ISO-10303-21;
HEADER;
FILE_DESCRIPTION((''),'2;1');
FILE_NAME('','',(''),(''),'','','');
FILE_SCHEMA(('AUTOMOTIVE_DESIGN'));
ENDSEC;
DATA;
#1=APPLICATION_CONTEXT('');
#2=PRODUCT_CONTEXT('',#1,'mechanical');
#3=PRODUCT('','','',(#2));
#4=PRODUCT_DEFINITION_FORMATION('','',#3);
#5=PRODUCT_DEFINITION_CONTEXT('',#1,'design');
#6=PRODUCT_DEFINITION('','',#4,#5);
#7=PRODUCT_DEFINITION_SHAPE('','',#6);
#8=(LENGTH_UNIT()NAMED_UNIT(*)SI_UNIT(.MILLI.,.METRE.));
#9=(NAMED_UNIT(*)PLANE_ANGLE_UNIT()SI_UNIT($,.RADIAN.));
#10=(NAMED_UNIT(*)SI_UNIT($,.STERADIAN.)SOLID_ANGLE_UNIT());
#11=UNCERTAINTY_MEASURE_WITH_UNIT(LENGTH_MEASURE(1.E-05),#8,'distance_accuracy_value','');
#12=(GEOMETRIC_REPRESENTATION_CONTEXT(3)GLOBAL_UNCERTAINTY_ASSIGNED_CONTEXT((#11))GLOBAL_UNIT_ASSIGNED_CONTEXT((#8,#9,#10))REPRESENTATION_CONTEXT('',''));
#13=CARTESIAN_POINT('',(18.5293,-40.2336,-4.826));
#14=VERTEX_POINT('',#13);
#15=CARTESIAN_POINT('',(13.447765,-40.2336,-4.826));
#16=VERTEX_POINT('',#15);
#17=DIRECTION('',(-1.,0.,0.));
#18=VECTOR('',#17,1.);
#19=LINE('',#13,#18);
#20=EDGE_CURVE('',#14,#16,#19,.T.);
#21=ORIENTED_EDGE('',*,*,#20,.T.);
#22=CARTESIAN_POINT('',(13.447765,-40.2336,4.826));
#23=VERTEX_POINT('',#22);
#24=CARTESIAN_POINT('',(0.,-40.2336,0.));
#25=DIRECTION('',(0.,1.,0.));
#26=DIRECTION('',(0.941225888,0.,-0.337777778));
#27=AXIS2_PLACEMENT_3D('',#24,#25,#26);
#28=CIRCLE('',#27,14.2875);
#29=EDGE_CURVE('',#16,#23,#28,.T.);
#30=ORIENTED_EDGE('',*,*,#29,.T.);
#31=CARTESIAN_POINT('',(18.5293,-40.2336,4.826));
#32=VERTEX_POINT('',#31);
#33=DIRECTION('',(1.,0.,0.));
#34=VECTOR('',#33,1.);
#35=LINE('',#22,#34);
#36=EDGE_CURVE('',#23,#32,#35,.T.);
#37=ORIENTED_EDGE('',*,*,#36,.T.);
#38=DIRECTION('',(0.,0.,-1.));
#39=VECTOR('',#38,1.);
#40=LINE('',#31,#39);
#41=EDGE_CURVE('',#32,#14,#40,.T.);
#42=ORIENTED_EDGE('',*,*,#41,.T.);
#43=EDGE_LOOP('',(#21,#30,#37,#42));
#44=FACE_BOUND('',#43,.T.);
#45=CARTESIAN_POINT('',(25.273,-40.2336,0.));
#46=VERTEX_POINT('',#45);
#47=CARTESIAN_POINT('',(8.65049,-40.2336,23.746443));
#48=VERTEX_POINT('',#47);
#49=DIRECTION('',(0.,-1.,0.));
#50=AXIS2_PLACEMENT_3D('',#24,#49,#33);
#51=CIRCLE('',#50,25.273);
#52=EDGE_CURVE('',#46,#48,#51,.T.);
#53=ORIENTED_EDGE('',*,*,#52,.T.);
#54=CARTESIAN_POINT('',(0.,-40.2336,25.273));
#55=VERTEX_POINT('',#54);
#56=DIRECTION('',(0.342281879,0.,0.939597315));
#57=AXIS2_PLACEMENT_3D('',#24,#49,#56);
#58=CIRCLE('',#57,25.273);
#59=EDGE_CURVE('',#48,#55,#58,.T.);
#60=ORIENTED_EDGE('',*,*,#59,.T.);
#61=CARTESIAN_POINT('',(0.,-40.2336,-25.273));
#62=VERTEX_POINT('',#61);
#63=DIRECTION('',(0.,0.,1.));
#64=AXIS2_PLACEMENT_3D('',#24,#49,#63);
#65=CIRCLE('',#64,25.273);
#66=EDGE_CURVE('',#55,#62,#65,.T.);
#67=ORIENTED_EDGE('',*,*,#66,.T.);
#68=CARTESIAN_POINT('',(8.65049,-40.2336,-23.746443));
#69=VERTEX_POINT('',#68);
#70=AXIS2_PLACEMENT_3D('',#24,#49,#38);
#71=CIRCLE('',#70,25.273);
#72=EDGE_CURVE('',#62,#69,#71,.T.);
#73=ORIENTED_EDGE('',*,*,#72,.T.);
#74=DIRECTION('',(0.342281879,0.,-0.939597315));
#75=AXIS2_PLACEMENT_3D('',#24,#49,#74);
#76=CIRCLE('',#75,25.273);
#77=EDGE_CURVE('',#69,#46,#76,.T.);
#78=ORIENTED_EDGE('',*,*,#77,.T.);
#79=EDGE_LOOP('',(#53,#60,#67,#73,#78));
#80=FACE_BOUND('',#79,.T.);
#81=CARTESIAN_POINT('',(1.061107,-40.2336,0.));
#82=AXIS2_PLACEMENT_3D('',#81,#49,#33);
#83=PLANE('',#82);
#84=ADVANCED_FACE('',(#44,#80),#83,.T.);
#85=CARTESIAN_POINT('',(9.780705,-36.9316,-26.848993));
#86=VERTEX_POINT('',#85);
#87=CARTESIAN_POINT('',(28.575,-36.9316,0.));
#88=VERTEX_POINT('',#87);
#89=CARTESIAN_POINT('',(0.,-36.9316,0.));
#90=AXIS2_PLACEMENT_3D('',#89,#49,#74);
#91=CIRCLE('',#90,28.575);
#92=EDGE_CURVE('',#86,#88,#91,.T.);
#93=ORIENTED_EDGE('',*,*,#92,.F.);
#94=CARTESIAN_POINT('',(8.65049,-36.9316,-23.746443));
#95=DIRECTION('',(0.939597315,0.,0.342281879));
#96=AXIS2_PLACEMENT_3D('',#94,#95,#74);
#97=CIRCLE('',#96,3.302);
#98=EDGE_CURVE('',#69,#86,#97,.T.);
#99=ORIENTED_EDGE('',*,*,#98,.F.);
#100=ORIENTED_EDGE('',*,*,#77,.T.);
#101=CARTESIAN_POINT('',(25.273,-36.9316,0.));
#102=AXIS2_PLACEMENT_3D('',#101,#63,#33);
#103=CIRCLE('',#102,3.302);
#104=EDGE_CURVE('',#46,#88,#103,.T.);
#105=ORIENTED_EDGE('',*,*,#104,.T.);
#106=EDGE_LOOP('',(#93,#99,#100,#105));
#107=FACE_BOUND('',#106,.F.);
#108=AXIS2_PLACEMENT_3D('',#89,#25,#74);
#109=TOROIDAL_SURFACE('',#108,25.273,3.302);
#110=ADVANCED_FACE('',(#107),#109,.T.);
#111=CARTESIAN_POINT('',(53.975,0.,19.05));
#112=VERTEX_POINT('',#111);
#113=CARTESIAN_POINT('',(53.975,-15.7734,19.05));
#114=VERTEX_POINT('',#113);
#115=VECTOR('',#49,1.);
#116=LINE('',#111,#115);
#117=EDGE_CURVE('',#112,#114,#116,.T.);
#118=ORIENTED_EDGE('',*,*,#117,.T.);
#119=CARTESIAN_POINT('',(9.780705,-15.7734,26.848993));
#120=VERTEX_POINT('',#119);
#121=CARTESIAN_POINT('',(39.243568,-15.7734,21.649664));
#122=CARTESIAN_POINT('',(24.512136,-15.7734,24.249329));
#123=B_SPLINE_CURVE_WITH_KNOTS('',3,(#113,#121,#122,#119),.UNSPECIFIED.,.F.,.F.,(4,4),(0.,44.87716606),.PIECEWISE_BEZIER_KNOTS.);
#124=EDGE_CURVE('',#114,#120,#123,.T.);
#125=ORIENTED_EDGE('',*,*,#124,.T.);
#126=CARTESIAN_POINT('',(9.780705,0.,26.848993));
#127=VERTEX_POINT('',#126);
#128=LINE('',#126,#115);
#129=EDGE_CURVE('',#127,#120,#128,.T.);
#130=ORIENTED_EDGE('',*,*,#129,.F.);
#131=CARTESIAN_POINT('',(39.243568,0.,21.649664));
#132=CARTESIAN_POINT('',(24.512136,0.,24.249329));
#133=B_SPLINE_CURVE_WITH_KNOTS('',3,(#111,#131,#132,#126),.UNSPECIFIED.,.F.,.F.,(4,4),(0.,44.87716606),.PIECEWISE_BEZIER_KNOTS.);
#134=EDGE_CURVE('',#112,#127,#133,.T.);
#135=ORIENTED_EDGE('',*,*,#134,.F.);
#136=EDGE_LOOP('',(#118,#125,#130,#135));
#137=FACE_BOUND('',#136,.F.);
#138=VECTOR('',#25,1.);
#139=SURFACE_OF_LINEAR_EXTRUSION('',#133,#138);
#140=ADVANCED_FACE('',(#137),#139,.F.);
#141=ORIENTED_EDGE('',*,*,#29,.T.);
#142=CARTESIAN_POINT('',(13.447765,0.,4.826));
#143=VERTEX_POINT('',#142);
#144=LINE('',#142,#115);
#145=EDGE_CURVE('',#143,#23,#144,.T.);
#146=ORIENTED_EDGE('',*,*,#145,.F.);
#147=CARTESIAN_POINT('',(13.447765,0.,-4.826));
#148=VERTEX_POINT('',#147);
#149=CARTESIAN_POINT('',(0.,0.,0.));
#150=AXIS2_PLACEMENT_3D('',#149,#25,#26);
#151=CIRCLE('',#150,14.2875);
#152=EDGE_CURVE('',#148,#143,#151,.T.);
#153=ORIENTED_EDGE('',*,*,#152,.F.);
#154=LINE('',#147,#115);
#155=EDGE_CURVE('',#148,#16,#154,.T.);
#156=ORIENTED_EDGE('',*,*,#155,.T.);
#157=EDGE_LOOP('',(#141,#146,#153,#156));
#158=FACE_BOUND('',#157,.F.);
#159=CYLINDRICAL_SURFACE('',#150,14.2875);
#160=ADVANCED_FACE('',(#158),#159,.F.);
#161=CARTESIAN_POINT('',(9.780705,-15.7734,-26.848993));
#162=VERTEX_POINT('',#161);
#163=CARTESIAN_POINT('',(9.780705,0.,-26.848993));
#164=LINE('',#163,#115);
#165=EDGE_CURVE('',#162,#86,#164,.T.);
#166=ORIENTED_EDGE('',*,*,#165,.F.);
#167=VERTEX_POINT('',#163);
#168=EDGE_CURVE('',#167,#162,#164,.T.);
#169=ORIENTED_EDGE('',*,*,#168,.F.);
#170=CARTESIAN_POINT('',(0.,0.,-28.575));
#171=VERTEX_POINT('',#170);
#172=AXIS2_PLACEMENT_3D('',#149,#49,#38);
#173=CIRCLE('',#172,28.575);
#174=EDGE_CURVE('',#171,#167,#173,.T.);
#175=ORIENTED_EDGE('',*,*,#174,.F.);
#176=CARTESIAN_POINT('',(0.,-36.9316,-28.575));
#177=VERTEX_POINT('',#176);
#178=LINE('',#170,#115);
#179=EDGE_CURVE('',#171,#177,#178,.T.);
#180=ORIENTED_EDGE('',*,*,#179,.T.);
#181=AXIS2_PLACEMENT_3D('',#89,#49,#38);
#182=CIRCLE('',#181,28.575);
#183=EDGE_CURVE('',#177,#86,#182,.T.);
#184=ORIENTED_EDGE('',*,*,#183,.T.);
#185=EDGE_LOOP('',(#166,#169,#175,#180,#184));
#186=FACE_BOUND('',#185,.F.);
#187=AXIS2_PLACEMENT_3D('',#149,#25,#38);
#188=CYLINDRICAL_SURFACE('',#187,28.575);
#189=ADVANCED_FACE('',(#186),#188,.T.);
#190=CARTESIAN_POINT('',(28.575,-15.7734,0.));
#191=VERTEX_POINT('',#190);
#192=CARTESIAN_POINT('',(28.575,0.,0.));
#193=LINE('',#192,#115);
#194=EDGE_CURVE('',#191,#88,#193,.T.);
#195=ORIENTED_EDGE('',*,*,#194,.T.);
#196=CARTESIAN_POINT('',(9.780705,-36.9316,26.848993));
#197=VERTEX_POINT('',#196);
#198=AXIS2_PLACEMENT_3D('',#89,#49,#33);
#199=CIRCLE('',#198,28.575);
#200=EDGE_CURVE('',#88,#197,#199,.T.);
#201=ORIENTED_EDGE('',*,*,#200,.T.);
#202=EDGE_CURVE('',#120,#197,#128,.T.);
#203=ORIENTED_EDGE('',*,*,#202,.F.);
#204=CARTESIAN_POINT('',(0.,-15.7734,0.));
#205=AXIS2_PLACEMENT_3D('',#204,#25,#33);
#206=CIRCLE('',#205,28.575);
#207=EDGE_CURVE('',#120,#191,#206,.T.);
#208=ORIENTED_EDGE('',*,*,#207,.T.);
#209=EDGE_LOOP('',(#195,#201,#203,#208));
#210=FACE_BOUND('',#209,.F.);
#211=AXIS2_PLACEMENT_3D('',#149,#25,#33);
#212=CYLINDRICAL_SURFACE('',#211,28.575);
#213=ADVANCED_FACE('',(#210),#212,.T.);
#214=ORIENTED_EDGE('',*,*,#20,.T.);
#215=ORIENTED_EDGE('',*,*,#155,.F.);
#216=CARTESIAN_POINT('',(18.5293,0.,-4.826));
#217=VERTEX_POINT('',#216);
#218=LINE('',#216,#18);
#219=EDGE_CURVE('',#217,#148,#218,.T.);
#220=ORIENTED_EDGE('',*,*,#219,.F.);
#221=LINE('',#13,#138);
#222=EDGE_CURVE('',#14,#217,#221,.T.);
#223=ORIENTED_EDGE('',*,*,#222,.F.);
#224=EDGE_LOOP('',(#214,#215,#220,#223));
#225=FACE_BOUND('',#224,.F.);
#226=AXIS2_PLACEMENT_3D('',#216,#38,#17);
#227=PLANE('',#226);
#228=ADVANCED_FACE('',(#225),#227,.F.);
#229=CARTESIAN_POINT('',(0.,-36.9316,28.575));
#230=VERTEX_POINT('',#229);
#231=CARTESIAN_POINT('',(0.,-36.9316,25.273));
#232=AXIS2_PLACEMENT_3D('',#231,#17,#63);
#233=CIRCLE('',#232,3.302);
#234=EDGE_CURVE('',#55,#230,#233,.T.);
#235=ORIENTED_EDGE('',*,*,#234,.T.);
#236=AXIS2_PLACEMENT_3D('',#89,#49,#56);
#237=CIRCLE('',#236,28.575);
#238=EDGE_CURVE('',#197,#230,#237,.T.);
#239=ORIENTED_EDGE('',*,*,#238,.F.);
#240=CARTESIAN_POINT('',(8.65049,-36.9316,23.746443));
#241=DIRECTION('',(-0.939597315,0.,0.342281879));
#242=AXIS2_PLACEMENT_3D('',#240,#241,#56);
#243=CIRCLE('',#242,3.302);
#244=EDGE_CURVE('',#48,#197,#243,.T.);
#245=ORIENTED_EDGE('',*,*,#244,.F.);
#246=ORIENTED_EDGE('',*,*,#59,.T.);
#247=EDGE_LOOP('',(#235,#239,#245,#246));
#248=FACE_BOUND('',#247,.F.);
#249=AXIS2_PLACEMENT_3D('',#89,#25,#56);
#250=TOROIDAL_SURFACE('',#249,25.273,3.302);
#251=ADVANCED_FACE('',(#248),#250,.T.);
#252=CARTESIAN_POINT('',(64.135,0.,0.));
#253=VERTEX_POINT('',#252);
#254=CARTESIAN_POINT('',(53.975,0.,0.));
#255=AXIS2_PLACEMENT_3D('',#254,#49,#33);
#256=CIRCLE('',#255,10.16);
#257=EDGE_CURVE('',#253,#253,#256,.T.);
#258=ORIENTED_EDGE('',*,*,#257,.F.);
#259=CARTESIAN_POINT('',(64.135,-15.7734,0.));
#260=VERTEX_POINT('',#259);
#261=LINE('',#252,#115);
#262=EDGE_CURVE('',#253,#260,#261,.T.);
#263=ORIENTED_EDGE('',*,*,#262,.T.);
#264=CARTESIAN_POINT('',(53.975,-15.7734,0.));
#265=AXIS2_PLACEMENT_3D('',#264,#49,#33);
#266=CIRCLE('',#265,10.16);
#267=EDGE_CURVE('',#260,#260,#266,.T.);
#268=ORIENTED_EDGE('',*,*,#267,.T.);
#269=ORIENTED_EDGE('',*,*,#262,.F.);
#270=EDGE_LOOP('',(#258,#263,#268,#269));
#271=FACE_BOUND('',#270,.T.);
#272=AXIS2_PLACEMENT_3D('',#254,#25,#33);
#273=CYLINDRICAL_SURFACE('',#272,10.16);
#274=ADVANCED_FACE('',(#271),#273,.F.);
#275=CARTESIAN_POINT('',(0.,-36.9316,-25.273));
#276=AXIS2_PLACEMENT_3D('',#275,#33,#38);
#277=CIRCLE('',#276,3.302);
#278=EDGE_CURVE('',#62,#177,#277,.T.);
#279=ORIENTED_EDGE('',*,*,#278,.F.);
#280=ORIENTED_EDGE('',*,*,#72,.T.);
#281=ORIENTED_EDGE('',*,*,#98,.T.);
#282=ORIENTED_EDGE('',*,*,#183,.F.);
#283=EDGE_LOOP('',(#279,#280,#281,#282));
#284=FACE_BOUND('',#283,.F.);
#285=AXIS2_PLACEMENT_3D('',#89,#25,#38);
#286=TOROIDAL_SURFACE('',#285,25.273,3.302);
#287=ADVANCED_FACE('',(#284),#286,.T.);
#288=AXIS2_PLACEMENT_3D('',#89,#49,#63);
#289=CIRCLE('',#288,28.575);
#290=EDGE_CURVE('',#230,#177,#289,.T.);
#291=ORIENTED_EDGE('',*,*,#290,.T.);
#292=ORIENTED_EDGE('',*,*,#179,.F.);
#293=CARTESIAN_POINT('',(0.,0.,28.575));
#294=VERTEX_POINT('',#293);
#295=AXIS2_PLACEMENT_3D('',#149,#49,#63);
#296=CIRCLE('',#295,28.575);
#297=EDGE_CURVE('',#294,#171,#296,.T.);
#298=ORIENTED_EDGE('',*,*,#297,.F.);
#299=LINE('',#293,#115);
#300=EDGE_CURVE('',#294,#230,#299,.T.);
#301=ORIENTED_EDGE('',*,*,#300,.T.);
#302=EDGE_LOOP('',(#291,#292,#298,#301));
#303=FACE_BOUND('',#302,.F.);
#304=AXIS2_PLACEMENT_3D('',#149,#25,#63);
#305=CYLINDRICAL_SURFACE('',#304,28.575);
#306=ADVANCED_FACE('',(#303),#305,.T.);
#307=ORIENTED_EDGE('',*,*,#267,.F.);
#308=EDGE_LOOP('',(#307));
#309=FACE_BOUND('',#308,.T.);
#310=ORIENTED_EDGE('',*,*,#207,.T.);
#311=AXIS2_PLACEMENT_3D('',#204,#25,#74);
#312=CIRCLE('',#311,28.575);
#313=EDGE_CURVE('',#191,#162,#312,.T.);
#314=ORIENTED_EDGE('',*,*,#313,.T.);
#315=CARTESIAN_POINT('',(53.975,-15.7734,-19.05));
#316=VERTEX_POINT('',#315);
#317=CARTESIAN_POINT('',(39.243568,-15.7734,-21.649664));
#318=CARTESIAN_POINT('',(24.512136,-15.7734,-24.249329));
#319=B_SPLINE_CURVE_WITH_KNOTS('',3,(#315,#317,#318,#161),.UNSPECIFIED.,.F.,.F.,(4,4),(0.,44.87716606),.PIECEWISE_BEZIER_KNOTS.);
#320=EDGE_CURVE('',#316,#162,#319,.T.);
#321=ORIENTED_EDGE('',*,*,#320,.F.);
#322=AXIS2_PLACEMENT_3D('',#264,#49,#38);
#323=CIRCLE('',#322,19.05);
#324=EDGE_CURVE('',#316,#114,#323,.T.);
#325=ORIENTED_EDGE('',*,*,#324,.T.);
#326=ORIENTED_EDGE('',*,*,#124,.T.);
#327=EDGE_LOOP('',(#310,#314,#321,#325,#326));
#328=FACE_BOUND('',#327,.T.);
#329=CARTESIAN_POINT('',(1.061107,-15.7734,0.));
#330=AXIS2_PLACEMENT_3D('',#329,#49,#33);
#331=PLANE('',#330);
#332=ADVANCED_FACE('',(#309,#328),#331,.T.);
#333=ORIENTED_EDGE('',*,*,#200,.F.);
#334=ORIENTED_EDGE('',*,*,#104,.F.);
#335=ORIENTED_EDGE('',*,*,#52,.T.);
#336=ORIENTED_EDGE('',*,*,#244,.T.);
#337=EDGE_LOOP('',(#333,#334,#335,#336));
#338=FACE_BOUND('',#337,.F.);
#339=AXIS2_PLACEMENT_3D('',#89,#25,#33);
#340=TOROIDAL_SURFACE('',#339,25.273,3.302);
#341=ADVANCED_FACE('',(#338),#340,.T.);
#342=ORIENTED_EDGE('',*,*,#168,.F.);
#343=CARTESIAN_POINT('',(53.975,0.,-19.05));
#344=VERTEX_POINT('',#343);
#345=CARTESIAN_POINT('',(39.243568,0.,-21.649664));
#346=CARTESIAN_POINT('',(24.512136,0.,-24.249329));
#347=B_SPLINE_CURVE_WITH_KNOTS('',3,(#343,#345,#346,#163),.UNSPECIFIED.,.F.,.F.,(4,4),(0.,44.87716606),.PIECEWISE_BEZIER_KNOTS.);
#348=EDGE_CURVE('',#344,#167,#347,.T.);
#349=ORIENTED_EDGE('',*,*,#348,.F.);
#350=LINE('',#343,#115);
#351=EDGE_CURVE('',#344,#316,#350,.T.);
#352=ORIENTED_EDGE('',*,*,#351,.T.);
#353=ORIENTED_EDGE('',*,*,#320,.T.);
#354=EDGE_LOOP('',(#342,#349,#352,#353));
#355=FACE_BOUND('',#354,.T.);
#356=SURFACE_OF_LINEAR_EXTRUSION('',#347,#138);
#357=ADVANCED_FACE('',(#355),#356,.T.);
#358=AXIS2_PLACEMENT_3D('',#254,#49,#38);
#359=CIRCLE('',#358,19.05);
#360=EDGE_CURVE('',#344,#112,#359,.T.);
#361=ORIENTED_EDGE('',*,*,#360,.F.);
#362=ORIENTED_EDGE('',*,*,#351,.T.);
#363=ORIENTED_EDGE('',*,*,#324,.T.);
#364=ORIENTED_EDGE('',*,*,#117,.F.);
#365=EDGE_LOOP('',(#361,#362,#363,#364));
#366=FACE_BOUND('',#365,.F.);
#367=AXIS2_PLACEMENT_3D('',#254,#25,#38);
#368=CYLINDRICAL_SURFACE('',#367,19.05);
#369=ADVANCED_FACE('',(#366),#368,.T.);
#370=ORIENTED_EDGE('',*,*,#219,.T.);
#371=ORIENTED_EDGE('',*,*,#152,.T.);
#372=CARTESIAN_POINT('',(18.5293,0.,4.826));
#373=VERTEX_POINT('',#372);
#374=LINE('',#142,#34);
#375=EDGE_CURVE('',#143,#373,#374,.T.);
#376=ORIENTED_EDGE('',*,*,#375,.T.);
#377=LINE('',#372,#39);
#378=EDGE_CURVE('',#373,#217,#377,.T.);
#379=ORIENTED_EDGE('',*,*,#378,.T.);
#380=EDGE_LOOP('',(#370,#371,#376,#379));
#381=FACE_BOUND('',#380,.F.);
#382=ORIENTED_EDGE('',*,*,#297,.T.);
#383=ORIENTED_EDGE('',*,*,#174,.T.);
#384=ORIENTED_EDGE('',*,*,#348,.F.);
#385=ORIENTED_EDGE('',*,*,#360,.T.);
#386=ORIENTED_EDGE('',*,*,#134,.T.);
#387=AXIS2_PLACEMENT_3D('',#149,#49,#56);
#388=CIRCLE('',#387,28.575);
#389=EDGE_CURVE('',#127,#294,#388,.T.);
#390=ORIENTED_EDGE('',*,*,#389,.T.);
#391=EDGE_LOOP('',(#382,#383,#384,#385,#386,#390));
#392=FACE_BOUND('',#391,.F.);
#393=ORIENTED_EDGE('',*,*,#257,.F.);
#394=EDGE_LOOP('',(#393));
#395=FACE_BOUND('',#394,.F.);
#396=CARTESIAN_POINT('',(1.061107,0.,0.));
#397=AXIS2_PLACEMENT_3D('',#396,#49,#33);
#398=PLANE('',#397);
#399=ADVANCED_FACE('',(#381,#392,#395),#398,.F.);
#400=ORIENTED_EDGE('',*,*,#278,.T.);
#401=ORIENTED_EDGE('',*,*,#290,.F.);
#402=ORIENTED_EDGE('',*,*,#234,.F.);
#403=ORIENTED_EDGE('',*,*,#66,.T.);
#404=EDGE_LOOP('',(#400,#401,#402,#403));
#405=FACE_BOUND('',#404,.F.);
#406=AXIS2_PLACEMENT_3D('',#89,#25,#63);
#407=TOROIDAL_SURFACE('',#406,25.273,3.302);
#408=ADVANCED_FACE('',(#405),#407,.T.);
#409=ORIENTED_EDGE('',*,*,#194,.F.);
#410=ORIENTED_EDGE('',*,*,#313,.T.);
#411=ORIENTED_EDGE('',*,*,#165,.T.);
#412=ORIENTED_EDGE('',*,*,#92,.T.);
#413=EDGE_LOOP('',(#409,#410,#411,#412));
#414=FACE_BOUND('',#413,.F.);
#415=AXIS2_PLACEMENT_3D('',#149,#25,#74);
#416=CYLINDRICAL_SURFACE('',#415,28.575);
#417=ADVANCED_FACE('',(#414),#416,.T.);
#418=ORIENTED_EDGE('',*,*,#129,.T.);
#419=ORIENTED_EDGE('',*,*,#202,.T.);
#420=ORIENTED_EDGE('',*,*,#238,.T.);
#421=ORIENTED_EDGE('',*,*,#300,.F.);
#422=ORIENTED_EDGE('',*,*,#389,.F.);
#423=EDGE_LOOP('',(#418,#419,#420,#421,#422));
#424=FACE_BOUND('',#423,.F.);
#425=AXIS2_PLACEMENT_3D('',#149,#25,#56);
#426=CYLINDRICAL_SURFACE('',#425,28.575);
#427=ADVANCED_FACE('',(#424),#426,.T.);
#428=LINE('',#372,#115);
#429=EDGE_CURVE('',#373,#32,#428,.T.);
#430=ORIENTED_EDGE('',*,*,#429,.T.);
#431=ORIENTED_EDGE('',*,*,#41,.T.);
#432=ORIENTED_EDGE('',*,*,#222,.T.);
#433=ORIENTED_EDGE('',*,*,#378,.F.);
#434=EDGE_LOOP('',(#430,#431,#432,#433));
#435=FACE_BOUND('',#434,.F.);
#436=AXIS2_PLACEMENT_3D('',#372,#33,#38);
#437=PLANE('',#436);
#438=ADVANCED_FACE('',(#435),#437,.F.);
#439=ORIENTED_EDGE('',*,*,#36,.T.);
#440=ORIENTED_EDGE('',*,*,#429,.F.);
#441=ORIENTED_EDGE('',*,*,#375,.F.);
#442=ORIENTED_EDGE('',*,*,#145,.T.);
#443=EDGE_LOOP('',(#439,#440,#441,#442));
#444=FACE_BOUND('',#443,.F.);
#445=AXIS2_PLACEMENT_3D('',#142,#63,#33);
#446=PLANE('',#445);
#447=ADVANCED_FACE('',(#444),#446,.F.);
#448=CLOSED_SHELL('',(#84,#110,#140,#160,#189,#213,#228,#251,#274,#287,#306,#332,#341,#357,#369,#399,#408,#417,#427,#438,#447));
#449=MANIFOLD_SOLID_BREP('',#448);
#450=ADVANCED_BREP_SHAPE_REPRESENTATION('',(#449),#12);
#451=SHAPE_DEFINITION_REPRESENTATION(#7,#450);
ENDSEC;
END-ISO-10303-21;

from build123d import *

# Parameters (mm, degrees)
F1_DEPTH = 40.2336
F0_R     = 10.16
F2_DEPTH = 15.7734
F3_R     = 3.302


with BuildPart() as f1:
    # F0 (on Front) → F1 (new body)
    with BuildSketch(Plane.XZ):
        with BuildLine():
            add(Edge.make_bspline(
                [(9.780704698, 26.8489932886), (6.5204697987, 27.4243288591), (3.2602348993, 27.9996644295), (0, 28.575)],
                knots=[44.8771660598, 44.8771660598, 44.8771660598, 44.8771660598, 54.8089978927, 54.8089978927, 54.8089978927, 54.8089978927], degree=3))
            ThreePointArc((0, 28.575), (-28.575, 0), (0, -28.575))
            add(Edge.make_bspline(
                [(9.780704698, -26.8489932886), (6.5204697987, -27.4243288591), (3.2602348993, -27.9996644295), (0, -28.575)],
                knots=[44.8771660598, 44.8771660598, 44.8771660598, 44.8771660598, 54.8089978927, 54.8089978927, 54.8089978927, 54.8089978927], degree=3))
            ThreePointArc((9.780704698, -26.8489932886), (23.4095521288, -16.3866864902), (28.575, 0))
            ThreePointArc((28.575, 0), (23.4095521288, 16.3866864902), (9.780704698, 26.8489932886))
        make_face()
        with BuildLine():
            ThreePointArc((13.4477648793, -4.826), (-14.2875, 0), (13.4477648793, 4.826))
            Line((13.4477648793, 4.826), (18.5293, 4.826))
            Line((18.5293, 4.826), (18.5293, -4.826))
            Line((18.5293, -4.826), (13.4477648793, -4.826))
        make_face(mode=Mode.SUBTRACT)
        with BuildLine():
            ThreePointArc((9.780704698, 26.8489932886), (4.9659159165, 28.1401901932), (0, 28.575))
            add(Edge.make_bspline(
                [(9.780704698, 26.8489932886), (6.5204697987, 27.4243288591), (3.2602348993, 27.9996644295), (0, 28.575)],
                knots=[44.8771660598, 44.8771660598, 44.8771660598, 44.8771660598, 54.8089978927, 54.8089978927, 54.8089978927, 54.8089978927], degree=3))
        make_face()
        with BuildLine():
            add(Edge.make_bspline(
                [(9.780704698, -26.8489932886), (6.5204697987, -27.4243288591), (3.2602348993, -27.9996644295), (0, -28.575)],
                knots=[44.8771660598, 44.8771660598, 44.8771660598, 44.8771660598, 54.8089978927, 54.8089978927, 54.8089978927, 54.8089978927], degree=3))
            ThreePointArc((0, -28.575), (4.9659159165, -28.1401901932), (9.780704698, -26.8489932886))
        make_face()
    extrude(amount=F1_DEPTH)

    # F0 (on Front) → F2 (join)
    with BuildSketch(Plane.XZ):
        with BuildLine():
            add(Edge.make_bspline(
                [(9.780704698, 26.8489932886), (6.5204697987, 27.4243288591), (3.2602348993, 27.9996644295), (0, 28.575)],
                knots=[44.8771660598, 44.8771660598, 44.8771660598, 44.8771660598, 54.8089978927, 54.8089978927, 54.8089978927, 54.8089978927], degree=3))
            ThreePointArc((0, 28.575), (-28.575, 0), (0, -28.575))
            add(Edge.make_bspline(
                [(9.780704698, -26.8489932886), (6.5204697987, -27.4243288591), (3.2602348993, -27.9996644295), (0, -28.575)],
                knots=[44.8771660598, 44.8771660598, 44.8771660598, 44.8771660598, 54.8089978927, 54.8089978927, 54.8089978927, 54.8089978927], degree=3))
            ThreePointArc((9.780704698, -26.8489932886), (23.4095521288, -16.3866864902), (28.575, 0))
            ThreePointArc((28.575, 0), (23.4095521288, 16.3866864902), (9.780704698, 26.8489932886))
        make_face()
        with BuildLine():
            ThreePointArc((13.4477648793, -4.826), (-14.2875, 0), (13.4477648793, 4.826))
            Line((13.4477648793, 4.826), (18.5293, 4.826))
            Line((18.5293, 4.826), (18.5293, -4.826))
            Line((18.5293, -4.826), (13.4477648793, -4.826))
        make_face(mode=Mode.SUBTRACT)
        with BuildLine():
            ThreePointArc((9.780704698, 26.8489932886), (4.9659159165, 28.1401901932), (0, 28.575))
            add(Edge.make_bspline(
                [(9.780704698, 26.8489932886), (6.5204697987, 27.4243288591), (3.2602348993, 27.9996644295), (0, 28.575)],
                knots=[44.8771660598, 44.8771660598, 44.8771660598, 44.8771660598, 54.8089978927, 54.8089978927, 54.8089978927, 54.8089978927], degree=3))
        make_face()
        with BuildLine():
            add(Edge.make_bspline(
                [(9.780704698, -26.8489932886), (6.5204697987, -27.4243288591), (3.2602348993, -27.9996644295), (0, -28.575)],
                knots=[44.8771660598, 44.8771660598, 44.8771660598, 44.8771660598, 54.8089978927, 54.8089978927, 54.8089978927, 54.8089978927], degree=3))
            ThreePointArc((0, -28.575), (4.9659159165, -28.1401901932), (9.780704698, -26.8489932886))
        make_face()
        with BuildLine():
            add(Edge.make_bspline(
                [(53.975, 19.05), (39.2435682327, 21.6496644295), (24.5121364653, 24.2493288591), (9.780704698, 26.8489932886)],
                knots=[0, 0, 0, 0, 44.8771660598, 44.8771660598, 44.8771660598, 44.8771660598], degree=3))
            ThreePointArc((9.780704698, 26.8489932886), (23.4095521288, 16.3866864902), (28.575, 0))
            ThreePointArc((28.575, 0), (23.4095521288, -16.3866864902), (9.780704698, -26.8489932886))
            add(Edge.make_bspline(
                [(53.975, -19.05), (39.2435682327, -21.6496644295), (24.5121364653, -24.2493288591), (9.780704698, -26.8489932886)],
                knots=[0, 0, 0, 0, 44.8771660598, 44.8771660598, 44.8771660598, 44.8771660598], degree=3))
            ThreePointArc((53.975, -19.05), (73.025, 0), (53.975, 19.05))
        make_face()
        with Locations((53.975, 0)):
            Circle(F0_R, mode=Mode.SUBTRACT)
    extrude(amount=F2_DEPTH)

    # F3
    f3_edges = [f1.edges().sort_by_distance(p)[0] for p in [
        (0, -40.2336, 28.575),
    ]]
    fillet(f3_edges, radius=F3_R)


solid = f1.part
